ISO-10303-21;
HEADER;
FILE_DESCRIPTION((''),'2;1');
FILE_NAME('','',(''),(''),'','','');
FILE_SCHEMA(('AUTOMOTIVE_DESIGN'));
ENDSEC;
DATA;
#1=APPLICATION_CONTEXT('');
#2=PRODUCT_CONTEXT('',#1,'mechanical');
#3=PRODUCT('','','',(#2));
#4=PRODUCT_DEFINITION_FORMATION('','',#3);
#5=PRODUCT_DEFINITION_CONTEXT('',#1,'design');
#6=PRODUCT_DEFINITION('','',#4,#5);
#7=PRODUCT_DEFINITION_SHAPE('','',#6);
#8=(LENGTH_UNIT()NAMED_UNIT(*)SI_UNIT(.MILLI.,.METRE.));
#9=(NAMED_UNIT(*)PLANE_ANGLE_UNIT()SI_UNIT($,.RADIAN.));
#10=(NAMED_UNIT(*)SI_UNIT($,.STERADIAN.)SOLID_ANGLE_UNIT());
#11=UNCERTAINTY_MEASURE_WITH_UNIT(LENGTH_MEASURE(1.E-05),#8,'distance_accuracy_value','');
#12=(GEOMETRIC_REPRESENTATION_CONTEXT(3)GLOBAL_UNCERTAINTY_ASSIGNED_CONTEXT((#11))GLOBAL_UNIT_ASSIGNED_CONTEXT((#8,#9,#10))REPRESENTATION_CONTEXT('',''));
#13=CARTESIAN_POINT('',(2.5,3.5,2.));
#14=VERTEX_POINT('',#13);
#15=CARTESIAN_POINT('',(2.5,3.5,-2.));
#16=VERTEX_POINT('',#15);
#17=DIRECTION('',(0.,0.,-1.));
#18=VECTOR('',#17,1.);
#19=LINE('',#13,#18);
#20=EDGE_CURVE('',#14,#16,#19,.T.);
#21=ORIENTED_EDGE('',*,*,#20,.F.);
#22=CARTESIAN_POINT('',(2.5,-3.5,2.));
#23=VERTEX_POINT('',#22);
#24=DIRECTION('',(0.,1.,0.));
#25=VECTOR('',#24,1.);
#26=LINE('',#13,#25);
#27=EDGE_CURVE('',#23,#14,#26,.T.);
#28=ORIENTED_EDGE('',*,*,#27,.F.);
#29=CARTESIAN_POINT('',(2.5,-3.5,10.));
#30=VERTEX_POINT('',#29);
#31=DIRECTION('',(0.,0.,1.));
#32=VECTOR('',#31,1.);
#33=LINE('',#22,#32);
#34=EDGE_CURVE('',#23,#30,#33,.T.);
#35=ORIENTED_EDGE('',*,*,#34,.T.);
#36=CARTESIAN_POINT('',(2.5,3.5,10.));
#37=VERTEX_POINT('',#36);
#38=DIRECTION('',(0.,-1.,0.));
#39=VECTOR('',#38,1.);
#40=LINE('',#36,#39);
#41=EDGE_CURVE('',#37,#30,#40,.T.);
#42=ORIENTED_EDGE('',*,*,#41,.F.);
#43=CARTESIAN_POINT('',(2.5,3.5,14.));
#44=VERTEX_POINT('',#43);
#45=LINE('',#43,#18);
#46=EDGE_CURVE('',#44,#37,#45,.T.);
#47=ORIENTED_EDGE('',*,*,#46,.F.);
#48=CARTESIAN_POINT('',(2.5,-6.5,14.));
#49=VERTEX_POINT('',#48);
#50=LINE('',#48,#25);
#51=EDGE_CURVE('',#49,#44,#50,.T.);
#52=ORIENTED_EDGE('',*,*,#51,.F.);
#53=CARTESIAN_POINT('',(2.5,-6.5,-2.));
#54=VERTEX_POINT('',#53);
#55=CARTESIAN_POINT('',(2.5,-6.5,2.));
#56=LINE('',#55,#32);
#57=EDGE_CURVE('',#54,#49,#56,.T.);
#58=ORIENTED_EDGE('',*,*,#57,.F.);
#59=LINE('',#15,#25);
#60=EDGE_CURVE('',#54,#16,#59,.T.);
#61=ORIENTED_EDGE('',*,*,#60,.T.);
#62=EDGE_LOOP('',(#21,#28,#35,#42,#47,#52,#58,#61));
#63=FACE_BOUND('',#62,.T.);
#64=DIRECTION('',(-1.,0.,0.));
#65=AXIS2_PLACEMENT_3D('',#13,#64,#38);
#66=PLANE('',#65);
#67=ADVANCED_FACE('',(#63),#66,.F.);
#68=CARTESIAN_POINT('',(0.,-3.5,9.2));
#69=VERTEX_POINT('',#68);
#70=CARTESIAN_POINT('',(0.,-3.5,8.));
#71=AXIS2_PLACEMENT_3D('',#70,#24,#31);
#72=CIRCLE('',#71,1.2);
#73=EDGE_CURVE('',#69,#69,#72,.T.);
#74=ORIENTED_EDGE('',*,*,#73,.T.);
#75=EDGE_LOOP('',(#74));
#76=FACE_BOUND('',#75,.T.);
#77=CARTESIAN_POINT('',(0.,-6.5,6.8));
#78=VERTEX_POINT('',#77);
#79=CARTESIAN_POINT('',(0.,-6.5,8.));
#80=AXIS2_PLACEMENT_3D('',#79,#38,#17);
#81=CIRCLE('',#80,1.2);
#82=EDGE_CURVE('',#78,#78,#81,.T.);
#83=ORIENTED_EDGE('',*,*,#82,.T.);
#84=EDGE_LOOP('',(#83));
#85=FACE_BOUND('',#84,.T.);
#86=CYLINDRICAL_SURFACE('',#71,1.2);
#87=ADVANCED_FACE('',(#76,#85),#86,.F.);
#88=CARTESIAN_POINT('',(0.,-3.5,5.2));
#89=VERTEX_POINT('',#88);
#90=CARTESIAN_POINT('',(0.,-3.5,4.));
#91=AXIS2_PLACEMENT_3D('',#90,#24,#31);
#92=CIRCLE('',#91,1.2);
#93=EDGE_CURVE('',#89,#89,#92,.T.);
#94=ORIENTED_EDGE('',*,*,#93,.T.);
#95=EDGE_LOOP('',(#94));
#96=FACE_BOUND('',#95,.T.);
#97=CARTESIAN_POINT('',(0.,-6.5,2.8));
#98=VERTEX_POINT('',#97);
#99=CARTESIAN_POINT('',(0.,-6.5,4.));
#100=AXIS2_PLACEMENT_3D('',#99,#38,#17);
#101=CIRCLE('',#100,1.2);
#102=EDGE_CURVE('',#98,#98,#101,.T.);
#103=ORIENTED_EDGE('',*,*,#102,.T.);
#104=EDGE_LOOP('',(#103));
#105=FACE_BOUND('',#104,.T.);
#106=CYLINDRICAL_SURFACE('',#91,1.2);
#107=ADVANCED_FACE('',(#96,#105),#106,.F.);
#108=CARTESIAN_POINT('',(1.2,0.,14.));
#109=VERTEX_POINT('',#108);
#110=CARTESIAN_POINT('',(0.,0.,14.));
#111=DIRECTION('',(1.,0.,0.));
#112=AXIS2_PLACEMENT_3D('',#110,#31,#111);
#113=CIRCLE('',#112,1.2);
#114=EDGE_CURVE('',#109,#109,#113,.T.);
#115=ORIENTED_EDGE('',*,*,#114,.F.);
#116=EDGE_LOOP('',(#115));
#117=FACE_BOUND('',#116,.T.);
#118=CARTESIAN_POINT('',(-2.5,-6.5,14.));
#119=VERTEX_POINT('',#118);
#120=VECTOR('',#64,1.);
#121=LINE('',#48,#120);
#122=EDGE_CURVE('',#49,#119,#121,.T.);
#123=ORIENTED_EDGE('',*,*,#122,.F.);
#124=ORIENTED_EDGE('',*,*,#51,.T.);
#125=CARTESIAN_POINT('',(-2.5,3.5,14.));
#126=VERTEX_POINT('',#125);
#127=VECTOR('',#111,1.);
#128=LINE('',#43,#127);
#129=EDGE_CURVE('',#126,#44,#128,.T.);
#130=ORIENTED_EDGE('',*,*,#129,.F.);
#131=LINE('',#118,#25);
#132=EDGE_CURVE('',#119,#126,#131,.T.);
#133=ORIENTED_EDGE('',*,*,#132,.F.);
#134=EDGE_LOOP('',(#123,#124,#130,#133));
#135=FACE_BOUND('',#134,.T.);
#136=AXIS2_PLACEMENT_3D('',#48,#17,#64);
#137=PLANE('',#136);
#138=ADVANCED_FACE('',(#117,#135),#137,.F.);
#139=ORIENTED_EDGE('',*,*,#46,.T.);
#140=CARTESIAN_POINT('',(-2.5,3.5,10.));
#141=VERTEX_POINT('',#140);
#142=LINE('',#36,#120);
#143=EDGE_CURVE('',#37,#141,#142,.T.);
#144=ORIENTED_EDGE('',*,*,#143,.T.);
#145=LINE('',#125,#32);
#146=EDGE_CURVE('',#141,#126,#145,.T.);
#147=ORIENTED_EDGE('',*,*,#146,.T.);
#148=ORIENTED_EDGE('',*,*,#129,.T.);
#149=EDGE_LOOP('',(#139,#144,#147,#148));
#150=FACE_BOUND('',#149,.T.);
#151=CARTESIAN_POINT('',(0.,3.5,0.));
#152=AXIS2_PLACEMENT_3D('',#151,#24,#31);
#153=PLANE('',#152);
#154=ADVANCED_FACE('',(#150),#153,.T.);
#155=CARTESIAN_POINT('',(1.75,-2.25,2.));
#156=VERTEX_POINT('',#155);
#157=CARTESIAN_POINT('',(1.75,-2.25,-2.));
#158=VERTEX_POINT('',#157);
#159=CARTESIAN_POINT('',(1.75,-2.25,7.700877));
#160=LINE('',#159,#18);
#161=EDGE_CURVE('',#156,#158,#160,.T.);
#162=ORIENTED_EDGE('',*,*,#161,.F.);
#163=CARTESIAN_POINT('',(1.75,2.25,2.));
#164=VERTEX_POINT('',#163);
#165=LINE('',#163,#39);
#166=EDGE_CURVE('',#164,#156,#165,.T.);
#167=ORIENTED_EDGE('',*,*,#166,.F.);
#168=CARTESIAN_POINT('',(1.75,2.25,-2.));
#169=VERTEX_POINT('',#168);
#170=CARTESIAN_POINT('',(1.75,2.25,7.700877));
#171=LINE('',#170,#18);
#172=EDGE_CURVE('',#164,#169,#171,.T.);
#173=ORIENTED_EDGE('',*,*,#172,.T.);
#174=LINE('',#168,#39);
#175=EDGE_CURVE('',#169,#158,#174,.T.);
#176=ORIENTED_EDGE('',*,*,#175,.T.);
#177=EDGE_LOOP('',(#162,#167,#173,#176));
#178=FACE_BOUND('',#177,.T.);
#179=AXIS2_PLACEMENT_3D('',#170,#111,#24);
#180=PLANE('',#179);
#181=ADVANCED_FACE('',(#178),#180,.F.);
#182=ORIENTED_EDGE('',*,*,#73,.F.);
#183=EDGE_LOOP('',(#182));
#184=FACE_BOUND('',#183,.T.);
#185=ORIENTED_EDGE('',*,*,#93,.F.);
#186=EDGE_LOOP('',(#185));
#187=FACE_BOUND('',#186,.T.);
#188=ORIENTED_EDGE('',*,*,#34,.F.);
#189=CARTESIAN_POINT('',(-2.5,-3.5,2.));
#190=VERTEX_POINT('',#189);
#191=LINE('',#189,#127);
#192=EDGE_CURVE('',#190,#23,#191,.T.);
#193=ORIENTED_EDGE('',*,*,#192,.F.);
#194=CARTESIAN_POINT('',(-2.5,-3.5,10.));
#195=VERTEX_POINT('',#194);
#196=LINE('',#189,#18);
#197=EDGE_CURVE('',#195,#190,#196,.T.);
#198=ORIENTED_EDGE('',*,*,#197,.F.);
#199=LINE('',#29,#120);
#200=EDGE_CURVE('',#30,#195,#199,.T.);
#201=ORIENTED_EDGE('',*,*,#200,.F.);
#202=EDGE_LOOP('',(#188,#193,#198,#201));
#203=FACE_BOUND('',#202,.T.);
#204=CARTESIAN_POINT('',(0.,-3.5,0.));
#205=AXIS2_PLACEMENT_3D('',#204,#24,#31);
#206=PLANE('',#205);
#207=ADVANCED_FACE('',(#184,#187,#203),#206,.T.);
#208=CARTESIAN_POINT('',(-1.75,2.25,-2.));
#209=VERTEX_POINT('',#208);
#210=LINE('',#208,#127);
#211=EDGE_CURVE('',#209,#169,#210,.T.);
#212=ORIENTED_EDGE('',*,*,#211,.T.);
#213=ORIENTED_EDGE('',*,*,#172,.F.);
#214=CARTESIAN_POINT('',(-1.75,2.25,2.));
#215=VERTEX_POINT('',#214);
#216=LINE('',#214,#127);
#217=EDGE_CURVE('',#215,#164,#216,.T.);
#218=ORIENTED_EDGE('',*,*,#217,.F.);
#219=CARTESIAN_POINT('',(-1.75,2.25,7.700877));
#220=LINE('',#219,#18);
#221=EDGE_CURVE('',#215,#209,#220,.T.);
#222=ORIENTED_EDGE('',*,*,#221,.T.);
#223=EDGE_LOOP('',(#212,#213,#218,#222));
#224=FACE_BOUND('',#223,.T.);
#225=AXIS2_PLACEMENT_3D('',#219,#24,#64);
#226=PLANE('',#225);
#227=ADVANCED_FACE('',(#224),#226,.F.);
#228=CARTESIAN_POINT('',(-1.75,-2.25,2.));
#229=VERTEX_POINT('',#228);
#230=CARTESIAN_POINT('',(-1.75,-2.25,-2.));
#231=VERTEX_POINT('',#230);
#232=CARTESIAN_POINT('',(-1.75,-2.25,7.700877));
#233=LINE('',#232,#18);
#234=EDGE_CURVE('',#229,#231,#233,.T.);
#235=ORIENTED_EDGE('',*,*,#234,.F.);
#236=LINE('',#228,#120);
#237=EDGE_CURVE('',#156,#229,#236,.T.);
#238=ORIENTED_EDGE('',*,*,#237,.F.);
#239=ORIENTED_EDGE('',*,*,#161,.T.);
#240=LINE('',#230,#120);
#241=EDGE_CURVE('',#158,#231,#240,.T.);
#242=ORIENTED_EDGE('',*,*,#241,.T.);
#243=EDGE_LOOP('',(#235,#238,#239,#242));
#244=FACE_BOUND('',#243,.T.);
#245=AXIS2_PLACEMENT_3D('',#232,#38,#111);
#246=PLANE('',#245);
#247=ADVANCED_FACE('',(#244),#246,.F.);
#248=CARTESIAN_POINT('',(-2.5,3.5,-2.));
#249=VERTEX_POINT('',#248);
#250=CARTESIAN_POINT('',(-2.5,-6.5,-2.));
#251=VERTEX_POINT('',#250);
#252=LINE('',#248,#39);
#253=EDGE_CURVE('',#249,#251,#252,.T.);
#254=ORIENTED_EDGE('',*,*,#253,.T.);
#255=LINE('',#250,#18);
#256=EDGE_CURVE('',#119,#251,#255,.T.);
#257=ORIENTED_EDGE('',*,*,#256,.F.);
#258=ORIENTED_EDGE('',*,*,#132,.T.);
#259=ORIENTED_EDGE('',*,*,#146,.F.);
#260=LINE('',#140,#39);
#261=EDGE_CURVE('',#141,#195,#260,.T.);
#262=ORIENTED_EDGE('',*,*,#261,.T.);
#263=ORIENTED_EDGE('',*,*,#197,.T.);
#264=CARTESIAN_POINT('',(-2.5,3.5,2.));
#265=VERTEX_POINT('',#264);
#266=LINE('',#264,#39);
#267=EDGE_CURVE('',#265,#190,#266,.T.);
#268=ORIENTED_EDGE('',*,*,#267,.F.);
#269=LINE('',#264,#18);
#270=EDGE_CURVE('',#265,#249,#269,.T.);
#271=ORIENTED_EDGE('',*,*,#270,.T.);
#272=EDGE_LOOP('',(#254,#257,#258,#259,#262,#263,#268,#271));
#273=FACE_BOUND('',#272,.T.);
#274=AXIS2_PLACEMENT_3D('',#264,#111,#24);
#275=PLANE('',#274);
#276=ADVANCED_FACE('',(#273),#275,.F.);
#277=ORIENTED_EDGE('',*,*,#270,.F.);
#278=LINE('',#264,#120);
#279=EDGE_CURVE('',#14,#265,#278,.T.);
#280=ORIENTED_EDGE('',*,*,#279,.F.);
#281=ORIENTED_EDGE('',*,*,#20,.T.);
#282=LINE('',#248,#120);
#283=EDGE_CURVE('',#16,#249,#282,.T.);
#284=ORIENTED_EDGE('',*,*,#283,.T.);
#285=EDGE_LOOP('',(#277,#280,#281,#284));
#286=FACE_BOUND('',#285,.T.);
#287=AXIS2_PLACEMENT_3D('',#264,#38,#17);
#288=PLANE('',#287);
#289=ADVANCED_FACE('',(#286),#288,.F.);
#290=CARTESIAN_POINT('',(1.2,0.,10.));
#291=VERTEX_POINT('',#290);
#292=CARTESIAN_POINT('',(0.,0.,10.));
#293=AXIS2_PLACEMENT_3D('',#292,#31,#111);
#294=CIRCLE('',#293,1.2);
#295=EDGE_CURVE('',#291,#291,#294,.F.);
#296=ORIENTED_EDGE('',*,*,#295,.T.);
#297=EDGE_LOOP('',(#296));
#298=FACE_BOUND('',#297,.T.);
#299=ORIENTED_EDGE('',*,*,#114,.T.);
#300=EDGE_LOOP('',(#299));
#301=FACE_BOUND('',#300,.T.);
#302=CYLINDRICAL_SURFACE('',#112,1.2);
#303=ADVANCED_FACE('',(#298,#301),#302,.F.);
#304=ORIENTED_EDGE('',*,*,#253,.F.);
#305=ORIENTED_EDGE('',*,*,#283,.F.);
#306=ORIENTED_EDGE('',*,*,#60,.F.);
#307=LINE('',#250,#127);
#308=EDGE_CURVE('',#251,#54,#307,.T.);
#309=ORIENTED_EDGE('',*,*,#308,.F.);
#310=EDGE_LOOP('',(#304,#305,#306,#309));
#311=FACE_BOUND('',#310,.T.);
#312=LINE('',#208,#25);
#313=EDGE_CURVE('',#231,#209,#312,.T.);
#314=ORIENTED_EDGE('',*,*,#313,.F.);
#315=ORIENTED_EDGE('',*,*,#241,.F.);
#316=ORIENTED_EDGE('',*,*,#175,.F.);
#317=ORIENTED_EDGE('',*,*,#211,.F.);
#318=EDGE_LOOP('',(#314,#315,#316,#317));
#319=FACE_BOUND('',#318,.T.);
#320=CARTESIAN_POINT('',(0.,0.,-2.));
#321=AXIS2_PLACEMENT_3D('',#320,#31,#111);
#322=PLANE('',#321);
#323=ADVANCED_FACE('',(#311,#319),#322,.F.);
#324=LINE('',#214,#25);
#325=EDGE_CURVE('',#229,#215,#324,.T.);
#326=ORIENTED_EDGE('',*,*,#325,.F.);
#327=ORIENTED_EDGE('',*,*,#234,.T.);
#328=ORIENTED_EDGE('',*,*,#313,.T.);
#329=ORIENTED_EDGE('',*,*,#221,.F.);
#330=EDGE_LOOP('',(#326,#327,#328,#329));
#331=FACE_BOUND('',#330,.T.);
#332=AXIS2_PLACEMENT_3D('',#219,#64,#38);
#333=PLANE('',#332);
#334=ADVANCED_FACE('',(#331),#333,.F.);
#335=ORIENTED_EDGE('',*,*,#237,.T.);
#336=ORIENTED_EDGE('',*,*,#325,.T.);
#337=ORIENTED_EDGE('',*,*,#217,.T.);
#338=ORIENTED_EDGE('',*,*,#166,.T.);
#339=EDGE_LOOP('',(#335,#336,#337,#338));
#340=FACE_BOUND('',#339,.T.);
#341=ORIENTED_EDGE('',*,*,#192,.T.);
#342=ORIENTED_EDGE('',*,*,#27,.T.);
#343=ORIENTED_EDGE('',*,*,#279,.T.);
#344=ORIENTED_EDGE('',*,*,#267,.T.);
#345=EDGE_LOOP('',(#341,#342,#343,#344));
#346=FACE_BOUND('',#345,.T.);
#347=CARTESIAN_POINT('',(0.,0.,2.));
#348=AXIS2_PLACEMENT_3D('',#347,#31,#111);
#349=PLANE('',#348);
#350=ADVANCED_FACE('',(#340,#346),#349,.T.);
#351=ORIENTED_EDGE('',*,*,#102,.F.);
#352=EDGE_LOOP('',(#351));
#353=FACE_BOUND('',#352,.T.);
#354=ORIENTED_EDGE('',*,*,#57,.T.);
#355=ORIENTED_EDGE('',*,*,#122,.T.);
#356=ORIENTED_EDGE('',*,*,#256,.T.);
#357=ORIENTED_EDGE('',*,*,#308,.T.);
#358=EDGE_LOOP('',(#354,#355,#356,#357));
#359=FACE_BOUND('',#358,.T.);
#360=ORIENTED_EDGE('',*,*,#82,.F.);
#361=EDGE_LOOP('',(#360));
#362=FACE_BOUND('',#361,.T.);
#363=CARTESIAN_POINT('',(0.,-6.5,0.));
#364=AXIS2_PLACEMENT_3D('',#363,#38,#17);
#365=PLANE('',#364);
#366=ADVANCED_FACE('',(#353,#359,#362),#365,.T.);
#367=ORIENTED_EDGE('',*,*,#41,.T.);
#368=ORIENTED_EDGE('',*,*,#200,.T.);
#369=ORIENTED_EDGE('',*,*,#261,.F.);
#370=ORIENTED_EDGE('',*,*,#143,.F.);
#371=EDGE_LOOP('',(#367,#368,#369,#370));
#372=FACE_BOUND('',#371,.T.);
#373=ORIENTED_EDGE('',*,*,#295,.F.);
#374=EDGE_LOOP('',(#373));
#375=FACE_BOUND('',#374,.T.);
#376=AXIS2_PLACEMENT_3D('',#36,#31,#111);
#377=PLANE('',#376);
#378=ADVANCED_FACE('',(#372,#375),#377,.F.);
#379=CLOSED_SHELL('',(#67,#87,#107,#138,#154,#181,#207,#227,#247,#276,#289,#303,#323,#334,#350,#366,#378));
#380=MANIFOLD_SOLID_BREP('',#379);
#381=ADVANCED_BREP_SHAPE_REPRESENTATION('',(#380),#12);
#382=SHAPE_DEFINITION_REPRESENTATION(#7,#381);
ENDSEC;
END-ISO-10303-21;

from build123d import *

# Parameters (mm, degrees)
SKETCH1_W                 = 5
SKETCH1_H                 = 7
BOSS_EXTRUDE1_DEPTH       = 2
BOSS_EXTRUDE3_DEPTH       = 3
SKETCH13_W                = 5
SKETCH13_H                = 4
BOSS_EXTRUDE4_DEPTH       = 7
SKETCH14_W                = 4
SKETCH14_H                = 4
BOSS_EXTRUDE6_DEPTH       = 3
FILLET1_R                 = 2.5
M2_CLEARANCE_HOLE3_REACH  = 20.453
M2_CLEARANCE_HOLE3_BORE_R = 1.2
SKETCH15_W                = 3.5
SKETCH15_H                = 4.5
CUT_EXTRUDE1_DEPTH        = 4
M2_CLEARANCE_HOLE2_D      = 2.4
M2_CLEARANCE_HOLE2_DEPTH  = 4
M2_CLEARANCE_HOLE2_TIP    = 0.721032743
SKETCH22_W                = 4
SKETCH22_H                = 16
CUT_EXTRUDE2_DEPTH        = 3


with BuildPart() as part:
    # Sketch1 → Boss-Extrude1 (new, symmetric)
    with BuildSketch(Plane.XY):
        Rectangle(SKETCH1_W, SKETCH1_H)
    extrude(amount=BOSS_EXTRUDE1_DEPTH, both=True)

    # Sketch9 → Boss-Extrude3 (add)
    with BuildSketch(Plane.XZ.offset(3.5)):
        Polygon((2.5, 2), (6.5, 2), (6.5, -2), (2.5, -2), (-2.5, -2), (-2.5, 2), (-2.5, 14), (2.5, 14), align=None)
    extrude(amount=BOSS_EXTRUDE3_DEPTH)

    # Sketch13 → Boss-Extrude4 (add)
    with BuildSketch(Plane(origin=(0, -3.5, 0), x_dir=(1, 0, 0), z_dir=(0, 1, 0))):
        with Locations((0, -12)):
            Rectangle(SKETCH13_W, SKETCH13_H)
    extrude(amount=BOSS_EXTRUDE4_DEPTH)

    # Sketch14 → Boss-Extrude6 (add)
    with BuildSketch(Plane(origin=(0, -3.5, 0), x_dir=(1, 0, 0), z_dir=(0, 1, 0))):
        with Locations((4.5, -12)):
            Rectangle(SKETCH14_W, SKETCH14_H)
    extrude(amount=-BOSS_EXTRUDE6_DEPTH)

    # Fillet1
    # the kernel refuses this fillet: 2.5 mm, written as the material it adds along each edge
    with BuildSketch(Plane(origin=(2.5, -3.5, 2), x_dir=(0, 0, 1), z_dir=(0, -1, 0))) as fillet1_piece_1:
        with BuildLine():
            CenterArc((FILLET1_R, -FILLET1_R), FILLET1_R, 90, 90)
            Line((0, -FILLET1_R), (0, 0))
            Line((0, 0), (FILLET1_R, 0))
        make_face()
    extrude(amount=3)
    with BuildSketch(Plane(origin=(2.5, -3.5, 10), x_dir=(0, 0, -1), z_dir=(0, -1, 0))) as fillet1_piece_2:
        with BuildLine():
            CenterArc((FILLET1_R, FILLET1_R), FILLET1_R, 180, 90)
            Line((0, FILLET1_R), (0, 0))
            Line((0, 0), (FILLET1_R, 0))
        make_face()
    extrude(amount=3)

    # M2 Clearance Hole3 bore → M2 Clearance Hole3 (cut, up to next)
    with BuildSketch(Plane.XY.offset(14), mode=Mode.PRIVATE) as m2_clearance_hole3_sk1:
        Circle(M2_CLEARANCE_HOLE3_BORE_R)
    m2_clearance_hole3_tool1 = extrude(m2_clearance_hole3_sk1.sketch, amount=-M2_CLEARANCE_HOLE3_REACH, mode=Mode.PRIVATE) & part.part
    add(m2_clearance_hole3_tool1.solids().sort_by_distance((0, 0, 14))[0], mode=Mode.SUBTRACT)

    # Sketch15 → Cut-Extrude1 (cut)
    with BuildSketch(Plane(origin=(0, 0, -2), x_dir=(-1, 0, 0), z_dir=(0, 0, -1))):
        Rectangle(SKETCH15_W, SKETCH15_H)
    extrude(amount=-CUT_EXTRUDE1_DEPTH, mode=Mode.SUBTRACT)

    # M2 Clearance Hole2
    with Locations(Plane(origin=(0, -3.5, 0), x_dir=(1, 0, 0), z_dir=(0, 1, 0))):
        with Locations((4.5, -12), (0, -8), (0, -4), (4.5, 0)):
            Hole(M2_CLEARANCE_HOLE2_D / 2, depth=M2_CLEARANCE_HOLE2_DEPTH)
            with Locations((0, 0, -(M2_CLEARANCE_HOLE2_DEPTH + M2_CLEARANCE_HOLE2_TIP / 2))):  # 118° drill point
                Cone(0, M2_CLEARANCE_HOLE2_D / 2, M2_CLEARANCE_HOLE2_TIP, mode=Mode.SUBTRACT)

    # Sketch22 → Cut-Extrude2 (cut)
    with BuildSketch(Plane(origin=(0, -3.5, 0), x_dir=(1, 0, 0), z_dir=(0, 1, 0))):
        with Locations((4.5, -6)):
            Rectangle(SKETCH22_W, SKETCH22_H)
    extrude(amount=-CUT_EXTRUDE2_DEPTH, mode=Mode.SUBTRACT)


solid = part.part
